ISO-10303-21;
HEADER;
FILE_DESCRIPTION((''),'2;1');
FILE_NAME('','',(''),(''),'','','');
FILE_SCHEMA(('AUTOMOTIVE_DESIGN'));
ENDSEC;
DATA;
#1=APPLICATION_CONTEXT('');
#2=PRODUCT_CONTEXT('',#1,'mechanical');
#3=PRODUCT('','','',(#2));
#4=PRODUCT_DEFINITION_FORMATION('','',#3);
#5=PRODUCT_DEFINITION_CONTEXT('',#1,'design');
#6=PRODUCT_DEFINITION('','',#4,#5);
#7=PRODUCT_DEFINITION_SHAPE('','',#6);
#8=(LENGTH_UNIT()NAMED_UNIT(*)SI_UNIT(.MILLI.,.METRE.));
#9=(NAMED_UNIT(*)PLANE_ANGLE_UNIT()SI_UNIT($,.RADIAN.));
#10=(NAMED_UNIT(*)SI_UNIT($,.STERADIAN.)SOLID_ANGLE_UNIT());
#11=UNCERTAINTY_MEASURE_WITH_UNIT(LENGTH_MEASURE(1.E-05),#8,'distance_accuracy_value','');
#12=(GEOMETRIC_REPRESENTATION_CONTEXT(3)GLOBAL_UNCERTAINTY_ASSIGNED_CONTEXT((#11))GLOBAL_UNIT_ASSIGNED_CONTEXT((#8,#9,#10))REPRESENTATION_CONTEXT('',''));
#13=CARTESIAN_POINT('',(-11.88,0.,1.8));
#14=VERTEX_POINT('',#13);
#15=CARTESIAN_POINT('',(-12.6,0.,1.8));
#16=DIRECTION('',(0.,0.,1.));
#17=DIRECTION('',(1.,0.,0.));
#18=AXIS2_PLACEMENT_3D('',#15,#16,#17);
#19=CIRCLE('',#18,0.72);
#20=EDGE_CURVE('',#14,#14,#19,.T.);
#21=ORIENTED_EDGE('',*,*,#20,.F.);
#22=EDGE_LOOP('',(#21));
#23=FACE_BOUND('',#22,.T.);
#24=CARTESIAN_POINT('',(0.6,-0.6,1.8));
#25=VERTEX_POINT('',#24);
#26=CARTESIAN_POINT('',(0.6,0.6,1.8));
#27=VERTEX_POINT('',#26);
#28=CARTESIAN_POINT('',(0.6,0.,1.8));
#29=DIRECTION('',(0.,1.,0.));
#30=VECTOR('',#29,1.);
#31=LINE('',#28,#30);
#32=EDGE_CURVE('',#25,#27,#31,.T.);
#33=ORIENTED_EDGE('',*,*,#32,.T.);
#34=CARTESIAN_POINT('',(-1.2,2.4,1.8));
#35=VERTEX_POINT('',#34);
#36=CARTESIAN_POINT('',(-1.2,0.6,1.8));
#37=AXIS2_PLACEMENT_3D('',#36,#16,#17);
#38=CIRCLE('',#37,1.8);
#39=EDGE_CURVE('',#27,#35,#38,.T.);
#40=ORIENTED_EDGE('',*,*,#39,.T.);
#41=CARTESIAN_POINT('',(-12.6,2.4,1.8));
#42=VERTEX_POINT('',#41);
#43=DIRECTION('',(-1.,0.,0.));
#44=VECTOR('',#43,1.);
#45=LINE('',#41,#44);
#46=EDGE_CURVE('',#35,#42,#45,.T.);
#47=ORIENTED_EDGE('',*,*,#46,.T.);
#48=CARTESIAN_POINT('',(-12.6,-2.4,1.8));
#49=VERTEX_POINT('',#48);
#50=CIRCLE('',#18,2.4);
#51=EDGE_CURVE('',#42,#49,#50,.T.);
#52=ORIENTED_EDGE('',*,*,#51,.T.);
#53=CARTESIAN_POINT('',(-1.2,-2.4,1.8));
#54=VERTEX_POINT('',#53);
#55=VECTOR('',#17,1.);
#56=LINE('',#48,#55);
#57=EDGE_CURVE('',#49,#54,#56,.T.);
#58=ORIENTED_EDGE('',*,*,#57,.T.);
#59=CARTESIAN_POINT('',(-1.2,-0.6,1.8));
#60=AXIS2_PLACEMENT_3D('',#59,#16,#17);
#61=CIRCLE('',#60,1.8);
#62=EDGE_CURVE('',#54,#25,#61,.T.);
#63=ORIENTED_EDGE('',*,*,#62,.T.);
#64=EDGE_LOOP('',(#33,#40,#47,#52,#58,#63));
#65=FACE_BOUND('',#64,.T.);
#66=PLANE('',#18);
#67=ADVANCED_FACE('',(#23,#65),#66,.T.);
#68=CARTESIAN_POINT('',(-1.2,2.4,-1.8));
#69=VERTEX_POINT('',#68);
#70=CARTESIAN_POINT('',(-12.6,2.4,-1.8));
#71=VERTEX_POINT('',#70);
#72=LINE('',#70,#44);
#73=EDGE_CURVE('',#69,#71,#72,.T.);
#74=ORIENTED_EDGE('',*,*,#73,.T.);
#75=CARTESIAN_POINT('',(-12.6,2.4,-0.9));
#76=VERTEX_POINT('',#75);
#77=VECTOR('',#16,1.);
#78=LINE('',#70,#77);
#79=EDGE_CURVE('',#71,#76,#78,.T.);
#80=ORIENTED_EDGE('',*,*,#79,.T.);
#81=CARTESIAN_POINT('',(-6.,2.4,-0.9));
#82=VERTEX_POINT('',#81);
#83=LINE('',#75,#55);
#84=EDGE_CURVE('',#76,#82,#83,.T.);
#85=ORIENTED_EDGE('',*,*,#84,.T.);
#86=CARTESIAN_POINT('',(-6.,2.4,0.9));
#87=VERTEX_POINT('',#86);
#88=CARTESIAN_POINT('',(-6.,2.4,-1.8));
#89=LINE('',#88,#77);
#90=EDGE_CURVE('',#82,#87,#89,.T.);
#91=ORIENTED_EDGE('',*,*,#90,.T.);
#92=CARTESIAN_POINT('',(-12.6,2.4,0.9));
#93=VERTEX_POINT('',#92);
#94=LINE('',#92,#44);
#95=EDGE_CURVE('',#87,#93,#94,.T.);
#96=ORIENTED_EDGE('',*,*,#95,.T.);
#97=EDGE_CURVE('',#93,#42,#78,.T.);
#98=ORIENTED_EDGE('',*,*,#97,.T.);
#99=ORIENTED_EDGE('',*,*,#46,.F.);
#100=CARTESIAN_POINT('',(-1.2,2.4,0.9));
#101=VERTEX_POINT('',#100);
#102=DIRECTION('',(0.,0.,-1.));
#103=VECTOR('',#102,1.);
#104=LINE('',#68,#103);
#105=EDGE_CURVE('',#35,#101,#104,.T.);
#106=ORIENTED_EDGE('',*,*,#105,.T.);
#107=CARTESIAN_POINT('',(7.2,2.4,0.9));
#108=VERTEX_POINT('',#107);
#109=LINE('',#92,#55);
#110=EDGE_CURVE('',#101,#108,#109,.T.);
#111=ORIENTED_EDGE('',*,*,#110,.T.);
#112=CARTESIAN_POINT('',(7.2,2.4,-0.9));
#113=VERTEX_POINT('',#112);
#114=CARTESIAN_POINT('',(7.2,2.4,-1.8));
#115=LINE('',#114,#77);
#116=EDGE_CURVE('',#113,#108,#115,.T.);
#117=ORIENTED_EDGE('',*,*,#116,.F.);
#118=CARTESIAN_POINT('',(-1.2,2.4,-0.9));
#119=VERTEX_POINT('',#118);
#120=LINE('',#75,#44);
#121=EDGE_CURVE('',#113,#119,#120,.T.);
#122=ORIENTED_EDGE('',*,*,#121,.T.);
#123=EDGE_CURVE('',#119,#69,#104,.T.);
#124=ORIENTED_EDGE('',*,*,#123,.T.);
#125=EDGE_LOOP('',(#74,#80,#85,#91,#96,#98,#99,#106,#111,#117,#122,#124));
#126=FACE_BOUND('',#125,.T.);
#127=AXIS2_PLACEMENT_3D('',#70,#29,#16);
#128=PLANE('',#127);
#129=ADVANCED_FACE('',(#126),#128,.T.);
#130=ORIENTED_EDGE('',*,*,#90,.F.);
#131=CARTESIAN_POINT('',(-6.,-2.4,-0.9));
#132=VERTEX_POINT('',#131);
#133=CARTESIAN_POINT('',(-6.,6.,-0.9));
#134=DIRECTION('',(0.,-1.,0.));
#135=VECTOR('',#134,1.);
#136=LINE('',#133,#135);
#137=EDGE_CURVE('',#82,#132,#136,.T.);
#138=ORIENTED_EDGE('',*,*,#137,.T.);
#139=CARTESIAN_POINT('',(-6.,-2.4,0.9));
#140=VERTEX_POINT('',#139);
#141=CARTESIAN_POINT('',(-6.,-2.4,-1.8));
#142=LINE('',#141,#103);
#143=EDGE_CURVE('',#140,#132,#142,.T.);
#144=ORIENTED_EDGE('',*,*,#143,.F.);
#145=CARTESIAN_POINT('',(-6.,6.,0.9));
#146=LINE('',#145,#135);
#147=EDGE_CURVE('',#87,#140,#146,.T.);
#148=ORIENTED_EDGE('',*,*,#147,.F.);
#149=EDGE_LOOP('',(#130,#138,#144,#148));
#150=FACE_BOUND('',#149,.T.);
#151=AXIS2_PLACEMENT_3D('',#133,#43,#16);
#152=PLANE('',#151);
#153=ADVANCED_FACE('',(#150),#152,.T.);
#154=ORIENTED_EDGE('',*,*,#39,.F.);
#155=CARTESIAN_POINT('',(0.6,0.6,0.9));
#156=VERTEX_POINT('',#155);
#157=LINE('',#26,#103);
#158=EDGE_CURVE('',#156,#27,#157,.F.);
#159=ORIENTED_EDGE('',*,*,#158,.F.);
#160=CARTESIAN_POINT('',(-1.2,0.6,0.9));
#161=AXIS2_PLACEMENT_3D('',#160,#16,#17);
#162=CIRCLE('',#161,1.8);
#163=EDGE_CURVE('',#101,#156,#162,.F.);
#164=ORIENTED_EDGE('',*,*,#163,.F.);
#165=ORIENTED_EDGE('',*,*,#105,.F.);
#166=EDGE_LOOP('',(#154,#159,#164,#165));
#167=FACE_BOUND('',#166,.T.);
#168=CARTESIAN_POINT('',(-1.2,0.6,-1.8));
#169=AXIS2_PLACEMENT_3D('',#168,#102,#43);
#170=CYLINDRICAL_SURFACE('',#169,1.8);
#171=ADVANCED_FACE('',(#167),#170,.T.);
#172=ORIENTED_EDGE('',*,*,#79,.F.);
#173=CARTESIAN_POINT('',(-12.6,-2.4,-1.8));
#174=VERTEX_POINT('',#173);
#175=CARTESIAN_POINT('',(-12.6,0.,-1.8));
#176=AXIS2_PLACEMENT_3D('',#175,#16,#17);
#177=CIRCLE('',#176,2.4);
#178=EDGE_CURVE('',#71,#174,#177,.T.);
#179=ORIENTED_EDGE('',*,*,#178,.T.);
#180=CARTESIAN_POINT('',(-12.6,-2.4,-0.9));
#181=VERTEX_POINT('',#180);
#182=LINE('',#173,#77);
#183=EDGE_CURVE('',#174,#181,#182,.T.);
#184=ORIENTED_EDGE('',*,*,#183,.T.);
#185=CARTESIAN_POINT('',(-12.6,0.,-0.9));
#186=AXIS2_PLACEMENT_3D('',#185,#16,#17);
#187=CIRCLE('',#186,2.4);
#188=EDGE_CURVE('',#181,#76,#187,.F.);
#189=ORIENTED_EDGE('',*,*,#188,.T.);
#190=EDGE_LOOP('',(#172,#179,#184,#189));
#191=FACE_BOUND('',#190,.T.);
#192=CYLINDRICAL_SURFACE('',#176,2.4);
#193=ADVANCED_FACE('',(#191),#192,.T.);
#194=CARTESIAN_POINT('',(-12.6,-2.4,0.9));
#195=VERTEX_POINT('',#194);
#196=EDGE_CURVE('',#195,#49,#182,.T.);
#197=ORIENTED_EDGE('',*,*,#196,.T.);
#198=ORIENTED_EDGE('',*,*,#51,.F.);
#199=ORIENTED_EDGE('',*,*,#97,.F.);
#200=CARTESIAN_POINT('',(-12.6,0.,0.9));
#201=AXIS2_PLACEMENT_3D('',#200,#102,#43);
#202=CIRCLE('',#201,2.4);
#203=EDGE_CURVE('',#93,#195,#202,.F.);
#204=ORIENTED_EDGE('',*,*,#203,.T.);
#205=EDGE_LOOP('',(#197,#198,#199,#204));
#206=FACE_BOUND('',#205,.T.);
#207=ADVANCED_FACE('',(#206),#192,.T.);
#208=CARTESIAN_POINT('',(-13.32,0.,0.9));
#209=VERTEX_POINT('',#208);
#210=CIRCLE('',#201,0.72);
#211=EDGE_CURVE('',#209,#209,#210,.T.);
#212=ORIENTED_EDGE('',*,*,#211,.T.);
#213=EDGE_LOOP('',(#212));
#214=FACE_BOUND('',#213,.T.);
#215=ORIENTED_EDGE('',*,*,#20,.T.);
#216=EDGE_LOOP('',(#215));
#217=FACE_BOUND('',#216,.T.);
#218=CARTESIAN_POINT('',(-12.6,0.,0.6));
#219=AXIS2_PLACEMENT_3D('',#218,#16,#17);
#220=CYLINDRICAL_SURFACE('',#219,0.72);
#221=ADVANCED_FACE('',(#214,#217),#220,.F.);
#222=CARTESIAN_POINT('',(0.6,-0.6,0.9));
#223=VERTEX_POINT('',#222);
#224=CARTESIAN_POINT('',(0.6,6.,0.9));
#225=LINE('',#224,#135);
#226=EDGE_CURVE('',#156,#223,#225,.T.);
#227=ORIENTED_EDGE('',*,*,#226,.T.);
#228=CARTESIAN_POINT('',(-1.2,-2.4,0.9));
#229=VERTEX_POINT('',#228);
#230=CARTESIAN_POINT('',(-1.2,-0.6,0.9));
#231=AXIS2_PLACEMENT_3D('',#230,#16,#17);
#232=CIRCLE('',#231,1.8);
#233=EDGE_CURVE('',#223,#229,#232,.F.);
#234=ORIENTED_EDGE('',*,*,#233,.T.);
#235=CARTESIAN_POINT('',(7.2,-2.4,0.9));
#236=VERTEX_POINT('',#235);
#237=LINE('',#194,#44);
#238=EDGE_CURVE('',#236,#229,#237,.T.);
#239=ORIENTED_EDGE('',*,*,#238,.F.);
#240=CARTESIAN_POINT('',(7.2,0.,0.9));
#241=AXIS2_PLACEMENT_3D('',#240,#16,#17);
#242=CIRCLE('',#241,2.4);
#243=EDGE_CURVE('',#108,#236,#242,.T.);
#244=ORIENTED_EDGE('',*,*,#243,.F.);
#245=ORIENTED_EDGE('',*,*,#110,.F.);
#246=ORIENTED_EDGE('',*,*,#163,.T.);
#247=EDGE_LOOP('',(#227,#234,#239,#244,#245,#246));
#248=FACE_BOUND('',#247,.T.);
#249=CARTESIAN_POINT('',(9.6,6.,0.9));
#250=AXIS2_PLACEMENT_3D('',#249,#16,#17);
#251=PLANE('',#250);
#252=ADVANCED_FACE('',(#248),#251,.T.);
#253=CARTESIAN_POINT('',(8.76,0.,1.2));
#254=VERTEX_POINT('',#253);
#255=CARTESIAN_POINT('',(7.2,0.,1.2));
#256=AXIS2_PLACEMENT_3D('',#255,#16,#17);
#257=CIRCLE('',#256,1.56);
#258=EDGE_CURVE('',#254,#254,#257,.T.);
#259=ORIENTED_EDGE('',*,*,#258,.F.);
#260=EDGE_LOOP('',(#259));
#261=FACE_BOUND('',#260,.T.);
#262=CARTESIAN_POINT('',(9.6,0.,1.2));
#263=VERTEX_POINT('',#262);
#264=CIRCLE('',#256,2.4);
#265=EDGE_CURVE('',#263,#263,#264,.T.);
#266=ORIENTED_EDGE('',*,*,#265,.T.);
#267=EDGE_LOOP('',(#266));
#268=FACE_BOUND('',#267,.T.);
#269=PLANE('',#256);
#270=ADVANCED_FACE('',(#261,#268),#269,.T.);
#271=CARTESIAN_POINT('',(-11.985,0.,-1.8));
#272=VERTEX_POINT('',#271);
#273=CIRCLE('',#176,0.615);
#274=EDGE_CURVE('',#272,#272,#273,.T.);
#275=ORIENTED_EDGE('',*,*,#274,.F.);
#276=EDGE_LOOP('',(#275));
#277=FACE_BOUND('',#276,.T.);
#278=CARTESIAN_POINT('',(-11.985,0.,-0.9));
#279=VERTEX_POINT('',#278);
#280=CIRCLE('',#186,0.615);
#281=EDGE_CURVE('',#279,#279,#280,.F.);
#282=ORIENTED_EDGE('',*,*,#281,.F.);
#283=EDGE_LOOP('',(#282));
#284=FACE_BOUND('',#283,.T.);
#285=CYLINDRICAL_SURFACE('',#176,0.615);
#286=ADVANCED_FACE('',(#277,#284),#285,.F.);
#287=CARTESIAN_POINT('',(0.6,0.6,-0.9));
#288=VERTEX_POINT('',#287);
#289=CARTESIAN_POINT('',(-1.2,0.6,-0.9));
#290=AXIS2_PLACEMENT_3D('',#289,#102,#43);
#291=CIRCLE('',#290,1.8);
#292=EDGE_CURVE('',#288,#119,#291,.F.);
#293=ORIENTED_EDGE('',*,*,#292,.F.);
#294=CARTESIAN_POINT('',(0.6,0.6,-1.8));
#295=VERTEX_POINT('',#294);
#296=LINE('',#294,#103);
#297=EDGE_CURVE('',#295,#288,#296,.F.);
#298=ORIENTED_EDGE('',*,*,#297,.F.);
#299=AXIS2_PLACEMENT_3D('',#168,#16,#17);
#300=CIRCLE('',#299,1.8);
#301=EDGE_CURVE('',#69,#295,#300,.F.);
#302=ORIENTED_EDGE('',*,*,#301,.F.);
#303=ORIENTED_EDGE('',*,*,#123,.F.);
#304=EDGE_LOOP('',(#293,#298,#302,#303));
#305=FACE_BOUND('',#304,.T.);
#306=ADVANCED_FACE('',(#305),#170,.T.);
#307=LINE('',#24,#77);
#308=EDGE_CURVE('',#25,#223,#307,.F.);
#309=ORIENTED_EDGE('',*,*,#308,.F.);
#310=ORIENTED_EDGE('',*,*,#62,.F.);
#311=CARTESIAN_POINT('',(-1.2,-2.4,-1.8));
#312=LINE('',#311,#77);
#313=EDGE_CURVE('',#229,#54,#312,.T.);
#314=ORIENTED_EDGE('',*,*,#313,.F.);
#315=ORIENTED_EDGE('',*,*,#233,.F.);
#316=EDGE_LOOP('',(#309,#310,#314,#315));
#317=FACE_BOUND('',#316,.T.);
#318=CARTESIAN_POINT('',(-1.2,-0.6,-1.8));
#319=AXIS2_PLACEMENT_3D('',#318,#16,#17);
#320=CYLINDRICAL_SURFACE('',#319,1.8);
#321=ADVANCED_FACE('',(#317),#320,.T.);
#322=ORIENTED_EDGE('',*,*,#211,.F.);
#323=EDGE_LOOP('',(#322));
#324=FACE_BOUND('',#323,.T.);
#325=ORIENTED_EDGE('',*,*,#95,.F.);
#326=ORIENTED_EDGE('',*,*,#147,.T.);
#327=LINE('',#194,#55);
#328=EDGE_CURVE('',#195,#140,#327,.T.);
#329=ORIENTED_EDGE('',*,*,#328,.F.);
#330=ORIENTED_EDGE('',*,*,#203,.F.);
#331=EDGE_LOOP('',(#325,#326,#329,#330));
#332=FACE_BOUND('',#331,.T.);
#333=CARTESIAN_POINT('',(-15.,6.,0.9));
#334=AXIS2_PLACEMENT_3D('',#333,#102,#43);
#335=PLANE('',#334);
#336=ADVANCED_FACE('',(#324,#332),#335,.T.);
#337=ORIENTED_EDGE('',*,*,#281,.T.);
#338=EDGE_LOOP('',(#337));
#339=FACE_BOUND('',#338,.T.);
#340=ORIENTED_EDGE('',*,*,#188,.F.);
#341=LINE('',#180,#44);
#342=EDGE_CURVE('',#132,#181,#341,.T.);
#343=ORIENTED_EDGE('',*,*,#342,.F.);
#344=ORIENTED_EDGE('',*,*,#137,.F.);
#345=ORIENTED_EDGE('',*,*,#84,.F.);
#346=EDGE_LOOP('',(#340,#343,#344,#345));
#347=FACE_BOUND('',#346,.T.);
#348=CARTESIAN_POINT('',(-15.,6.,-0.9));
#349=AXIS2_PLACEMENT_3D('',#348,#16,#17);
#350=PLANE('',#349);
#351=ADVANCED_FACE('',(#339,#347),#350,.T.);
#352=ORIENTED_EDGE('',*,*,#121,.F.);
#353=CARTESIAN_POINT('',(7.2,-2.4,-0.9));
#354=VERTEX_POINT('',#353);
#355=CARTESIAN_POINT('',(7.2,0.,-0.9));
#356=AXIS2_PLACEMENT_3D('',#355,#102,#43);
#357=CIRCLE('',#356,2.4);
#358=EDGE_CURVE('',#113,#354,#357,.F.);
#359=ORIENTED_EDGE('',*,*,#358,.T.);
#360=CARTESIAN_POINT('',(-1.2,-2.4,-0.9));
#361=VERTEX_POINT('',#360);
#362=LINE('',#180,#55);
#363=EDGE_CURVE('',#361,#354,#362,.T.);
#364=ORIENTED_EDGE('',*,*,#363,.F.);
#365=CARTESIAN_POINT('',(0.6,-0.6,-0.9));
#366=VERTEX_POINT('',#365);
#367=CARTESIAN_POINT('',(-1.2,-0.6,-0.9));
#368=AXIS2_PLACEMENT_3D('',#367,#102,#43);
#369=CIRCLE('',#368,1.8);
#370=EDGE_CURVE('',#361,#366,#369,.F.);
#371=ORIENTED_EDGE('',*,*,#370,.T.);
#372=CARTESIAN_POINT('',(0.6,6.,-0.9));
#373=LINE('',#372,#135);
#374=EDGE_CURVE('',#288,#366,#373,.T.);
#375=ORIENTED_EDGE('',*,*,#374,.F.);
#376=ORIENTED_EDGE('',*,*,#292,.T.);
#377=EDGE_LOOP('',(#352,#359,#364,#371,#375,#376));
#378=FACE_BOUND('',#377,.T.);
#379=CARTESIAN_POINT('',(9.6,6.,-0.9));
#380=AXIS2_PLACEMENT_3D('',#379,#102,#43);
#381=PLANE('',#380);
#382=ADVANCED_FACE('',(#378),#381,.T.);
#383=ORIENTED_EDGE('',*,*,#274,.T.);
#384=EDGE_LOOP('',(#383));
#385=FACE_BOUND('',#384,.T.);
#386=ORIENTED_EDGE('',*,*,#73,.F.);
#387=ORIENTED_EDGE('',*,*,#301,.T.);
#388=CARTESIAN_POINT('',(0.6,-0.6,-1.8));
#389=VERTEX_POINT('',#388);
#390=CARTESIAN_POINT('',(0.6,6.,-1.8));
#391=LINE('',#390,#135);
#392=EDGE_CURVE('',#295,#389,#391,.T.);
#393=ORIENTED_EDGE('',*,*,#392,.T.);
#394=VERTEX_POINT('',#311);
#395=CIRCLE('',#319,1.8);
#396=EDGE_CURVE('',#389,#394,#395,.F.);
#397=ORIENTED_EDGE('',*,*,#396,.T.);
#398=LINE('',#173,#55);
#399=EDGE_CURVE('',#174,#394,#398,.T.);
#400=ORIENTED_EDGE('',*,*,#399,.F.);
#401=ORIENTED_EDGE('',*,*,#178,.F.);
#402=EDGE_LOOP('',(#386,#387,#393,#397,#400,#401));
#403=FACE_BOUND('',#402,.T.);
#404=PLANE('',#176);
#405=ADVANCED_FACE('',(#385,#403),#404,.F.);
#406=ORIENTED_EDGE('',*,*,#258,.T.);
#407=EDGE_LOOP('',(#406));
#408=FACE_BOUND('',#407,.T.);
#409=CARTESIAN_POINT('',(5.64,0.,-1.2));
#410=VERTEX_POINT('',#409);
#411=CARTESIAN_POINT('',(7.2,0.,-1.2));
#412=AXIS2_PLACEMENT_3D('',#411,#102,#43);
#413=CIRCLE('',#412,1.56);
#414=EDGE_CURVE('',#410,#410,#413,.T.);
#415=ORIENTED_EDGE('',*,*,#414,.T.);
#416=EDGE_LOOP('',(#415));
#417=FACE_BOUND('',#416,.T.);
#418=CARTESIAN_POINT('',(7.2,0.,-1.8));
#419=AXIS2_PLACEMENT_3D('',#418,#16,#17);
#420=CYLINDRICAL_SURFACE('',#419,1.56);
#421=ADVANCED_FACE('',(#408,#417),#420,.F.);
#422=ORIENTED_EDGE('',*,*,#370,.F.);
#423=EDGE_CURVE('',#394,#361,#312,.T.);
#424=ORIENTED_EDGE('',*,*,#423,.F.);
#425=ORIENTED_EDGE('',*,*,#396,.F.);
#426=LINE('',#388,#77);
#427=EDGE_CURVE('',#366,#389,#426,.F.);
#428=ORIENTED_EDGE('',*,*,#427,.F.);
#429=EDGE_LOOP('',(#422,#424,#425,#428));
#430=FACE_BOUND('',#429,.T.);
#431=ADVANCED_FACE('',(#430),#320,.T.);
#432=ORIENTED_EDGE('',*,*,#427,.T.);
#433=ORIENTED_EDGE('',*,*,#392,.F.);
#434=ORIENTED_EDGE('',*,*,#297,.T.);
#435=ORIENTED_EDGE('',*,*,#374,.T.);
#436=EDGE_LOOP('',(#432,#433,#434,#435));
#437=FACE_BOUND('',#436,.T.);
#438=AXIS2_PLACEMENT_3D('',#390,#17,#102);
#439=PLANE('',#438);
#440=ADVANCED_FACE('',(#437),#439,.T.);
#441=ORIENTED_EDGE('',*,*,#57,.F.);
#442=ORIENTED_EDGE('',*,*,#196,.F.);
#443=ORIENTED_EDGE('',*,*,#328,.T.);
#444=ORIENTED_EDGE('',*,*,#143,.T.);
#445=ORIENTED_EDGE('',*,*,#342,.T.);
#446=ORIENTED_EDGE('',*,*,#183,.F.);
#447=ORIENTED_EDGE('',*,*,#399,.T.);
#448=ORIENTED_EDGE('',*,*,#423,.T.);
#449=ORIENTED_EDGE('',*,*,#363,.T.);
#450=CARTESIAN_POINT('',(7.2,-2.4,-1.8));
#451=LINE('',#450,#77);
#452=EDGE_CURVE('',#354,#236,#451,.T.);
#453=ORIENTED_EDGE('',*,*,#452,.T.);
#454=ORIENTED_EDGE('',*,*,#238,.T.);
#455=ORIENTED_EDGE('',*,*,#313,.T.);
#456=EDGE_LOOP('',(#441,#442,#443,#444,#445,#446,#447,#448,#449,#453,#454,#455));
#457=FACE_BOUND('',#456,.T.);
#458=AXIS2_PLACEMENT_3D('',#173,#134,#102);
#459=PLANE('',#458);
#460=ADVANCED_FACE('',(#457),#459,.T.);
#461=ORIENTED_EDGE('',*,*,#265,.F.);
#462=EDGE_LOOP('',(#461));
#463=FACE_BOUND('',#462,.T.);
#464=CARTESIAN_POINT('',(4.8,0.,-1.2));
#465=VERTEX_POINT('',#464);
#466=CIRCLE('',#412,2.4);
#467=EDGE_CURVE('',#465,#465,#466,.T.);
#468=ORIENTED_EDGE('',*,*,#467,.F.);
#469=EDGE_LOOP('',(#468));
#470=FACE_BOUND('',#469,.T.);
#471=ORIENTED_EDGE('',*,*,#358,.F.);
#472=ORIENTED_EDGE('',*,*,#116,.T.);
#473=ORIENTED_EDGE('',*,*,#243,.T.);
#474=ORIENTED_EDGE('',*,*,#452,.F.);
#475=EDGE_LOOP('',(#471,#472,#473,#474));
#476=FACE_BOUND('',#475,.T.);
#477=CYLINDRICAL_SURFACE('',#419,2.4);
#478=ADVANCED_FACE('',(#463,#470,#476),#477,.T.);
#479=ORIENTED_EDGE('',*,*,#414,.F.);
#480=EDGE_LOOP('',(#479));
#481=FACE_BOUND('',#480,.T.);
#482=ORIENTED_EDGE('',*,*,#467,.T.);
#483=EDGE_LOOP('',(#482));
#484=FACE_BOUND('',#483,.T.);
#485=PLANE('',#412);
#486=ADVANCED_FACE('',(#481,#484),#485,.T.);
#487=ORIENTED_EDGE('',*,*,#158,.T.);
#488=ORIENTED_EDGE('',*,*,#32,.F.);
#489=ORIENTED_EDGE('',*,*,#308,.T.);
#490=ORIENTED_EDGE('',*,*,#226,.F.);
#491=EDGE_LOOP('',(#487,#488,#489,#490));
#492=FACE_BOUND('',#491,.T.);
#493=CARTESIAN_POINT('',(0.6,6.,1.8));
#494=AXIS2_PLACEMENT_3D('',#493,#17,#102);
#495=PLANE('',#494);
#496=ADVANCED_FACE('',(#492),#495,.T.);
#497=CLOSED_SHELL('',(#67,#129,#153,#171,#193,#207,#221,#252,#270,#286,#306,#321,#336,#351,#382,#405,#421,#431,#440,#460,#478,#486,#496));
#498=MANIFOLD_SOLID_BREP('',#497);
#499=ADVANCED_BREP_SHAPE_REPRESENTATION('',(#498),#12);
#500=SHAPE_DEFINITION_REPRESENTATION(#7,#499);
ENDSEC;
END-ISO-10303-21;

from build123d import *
from build123d.topology import SkipClean

# Parameters (mm, degrees)
EXTRUDE_1_DEPTH          = 3
EXTRUDE_1_DEPTH_BACK     = 3
SKETCH_1_R               = 1.025
SKETCH_1_R_2             = 2.6
CUT_EXTRUDE_1_DEPTH      = 10
CUT_EXTRUDE_1_DEPTH_BACK = 10
SKETCH_3_W               = 15
SKETCH_3_H               = 3
SKETCH_3_H_2             = 1.5
FILLET_1_R               = 3
SKETCH_4_R               = 4
SKETCH_4_R_2             = 2.6
EXTRUDE_2_DEPTH          = 0.5
EXTRUDE_START            = 0.5
SKETCH_5_R               = 2.6
EXTRUDE_3_DEPTH          = 0.5
SKETCH_6_R               = 1.2
CUT_EXTRUDE_2_DEPTH      = 2
SCALE_1_SCALE            = 0.6


with BuildPart() as part:
    # 草图1 → 凸台-拉伸1 (new, two sides: drawn at the far end of the back side and taken through both)
    with BuildSketch(Plane.XY.offset(-EXTRUDE_1_DEPTH_BACK)):
        with BuildLine():
            Line((-21, 4), (12, 4))
            ThreePointArc((12, 4), (16, 0), (12, -4))
            Line((12, -4), (-21, -4))
            ThreePointArc((-21, -4), (-25, 0), (-21, 4))
        make_face()
        with Locations((-21, 0)):
            Circle(SKETCH_1_R, mode=Mode.SUBTRACT)
        with Locations((12, 0)):
            Circle(SKETCH_1_R_2, mode=Mode.SUBTRACT)
    extrude(amount=EXTRUDE_1_DEPTH + EXTRUDE_1_DEPTH_BACK)

    # 草图3 → 切除-拉伸1 (cut, two sides: drawn at the far end of the back side and taken through both)
    with BuildSketch(Plane(origin=(0, 0, 0), x_dir=(1, 0, 0), z_dir=(0, 1, 0)).offset(-CUT_EXTRUDE_1_DEPTH_BACK)):
        with Locations((-17.5, 0)):
            Rectangle(SKETCH_3_W, SKETCH_3_H)
        with Locations((8.5, 2.25)):
            Rectangle(SKETCH_3_W, SKETCH_3_H_2)
        with Locations((8.5, -2.25)):
            Rectangle(SKETCH_3_W, SKETCH_3_H_2)
    extrude(amount=CUT_EXTRUDE_1_DEPTH + CUT_EXTRUDE_1_DEPTH_BACK, mode=Mode.SUBTRACT)

    # 圆角1
    fillet_1_edges = [part.edges().sort_by_distance(p)[0] for p in [
        (1, -4, 2.25),
        (1, 4, 2.25),
        (1, -4, -2.25),
        (1, 4, -2.25),
    ]]
    fillet(fillet_1_edges, radius=FILLET_1_R)

    # 草图4 → 凸台-拉伸2 (add)
    with SkipClean():  # the faces are left unmerged after this step: merging them gives an invalid solid
        with BuildSketch(Plane.XY.offset(1.5)):
            with Locations((12, 0)):
                Circle(SKETCH_4_R)
            with Locations((12, 0)):
                Circle(SKETCH_4_R_2, mode=Mode.SUBTRACT)
        extrude(amount=EXTRUDE_2_DEPTH)
    add(part.part.scale(1), mode=Mode.REPLACE)  # the faces are merged on a copy

    # 草图5 → 凸台-拉伸3 (add)
    with BuildSketch(Plane(origin=(0, 0, -1.5), x_dir=(-1, 0, 0), z_dir=(0, 0, -1)).offset(EXTRUDE_START)):
        with BuildLine():
            ThreePointArc((-12, 4), (-16, 0), (-12, -4))
            ThreePointArc((-12, -4), (-8, 0), (-12, 4))
        make_face()
        with Locations((-12, 0)):
            Circle(SKETCH_5_R, mode=Mode.SUBTRACT)
    extrude(amount=-EXTRUDE_3_DEPTH)

    # 草图6 → 切除-拉伸2 (cut)
    with BuildSketch(Plane.XY.offset(3)):
        with Locations((-21, 0)):
            Circle(SKETCH_6_R)
    extrude(amount=-CUT_EXTRUDE_2_DEPTH, mode=Mode.SUBTRACT)


with BuildPart() as part_1:
    # 缩放比例1: scaled about (0, 0, 0)
    add(part.part.scale(SCALE_1_SCALE))


solid = part_1.part
